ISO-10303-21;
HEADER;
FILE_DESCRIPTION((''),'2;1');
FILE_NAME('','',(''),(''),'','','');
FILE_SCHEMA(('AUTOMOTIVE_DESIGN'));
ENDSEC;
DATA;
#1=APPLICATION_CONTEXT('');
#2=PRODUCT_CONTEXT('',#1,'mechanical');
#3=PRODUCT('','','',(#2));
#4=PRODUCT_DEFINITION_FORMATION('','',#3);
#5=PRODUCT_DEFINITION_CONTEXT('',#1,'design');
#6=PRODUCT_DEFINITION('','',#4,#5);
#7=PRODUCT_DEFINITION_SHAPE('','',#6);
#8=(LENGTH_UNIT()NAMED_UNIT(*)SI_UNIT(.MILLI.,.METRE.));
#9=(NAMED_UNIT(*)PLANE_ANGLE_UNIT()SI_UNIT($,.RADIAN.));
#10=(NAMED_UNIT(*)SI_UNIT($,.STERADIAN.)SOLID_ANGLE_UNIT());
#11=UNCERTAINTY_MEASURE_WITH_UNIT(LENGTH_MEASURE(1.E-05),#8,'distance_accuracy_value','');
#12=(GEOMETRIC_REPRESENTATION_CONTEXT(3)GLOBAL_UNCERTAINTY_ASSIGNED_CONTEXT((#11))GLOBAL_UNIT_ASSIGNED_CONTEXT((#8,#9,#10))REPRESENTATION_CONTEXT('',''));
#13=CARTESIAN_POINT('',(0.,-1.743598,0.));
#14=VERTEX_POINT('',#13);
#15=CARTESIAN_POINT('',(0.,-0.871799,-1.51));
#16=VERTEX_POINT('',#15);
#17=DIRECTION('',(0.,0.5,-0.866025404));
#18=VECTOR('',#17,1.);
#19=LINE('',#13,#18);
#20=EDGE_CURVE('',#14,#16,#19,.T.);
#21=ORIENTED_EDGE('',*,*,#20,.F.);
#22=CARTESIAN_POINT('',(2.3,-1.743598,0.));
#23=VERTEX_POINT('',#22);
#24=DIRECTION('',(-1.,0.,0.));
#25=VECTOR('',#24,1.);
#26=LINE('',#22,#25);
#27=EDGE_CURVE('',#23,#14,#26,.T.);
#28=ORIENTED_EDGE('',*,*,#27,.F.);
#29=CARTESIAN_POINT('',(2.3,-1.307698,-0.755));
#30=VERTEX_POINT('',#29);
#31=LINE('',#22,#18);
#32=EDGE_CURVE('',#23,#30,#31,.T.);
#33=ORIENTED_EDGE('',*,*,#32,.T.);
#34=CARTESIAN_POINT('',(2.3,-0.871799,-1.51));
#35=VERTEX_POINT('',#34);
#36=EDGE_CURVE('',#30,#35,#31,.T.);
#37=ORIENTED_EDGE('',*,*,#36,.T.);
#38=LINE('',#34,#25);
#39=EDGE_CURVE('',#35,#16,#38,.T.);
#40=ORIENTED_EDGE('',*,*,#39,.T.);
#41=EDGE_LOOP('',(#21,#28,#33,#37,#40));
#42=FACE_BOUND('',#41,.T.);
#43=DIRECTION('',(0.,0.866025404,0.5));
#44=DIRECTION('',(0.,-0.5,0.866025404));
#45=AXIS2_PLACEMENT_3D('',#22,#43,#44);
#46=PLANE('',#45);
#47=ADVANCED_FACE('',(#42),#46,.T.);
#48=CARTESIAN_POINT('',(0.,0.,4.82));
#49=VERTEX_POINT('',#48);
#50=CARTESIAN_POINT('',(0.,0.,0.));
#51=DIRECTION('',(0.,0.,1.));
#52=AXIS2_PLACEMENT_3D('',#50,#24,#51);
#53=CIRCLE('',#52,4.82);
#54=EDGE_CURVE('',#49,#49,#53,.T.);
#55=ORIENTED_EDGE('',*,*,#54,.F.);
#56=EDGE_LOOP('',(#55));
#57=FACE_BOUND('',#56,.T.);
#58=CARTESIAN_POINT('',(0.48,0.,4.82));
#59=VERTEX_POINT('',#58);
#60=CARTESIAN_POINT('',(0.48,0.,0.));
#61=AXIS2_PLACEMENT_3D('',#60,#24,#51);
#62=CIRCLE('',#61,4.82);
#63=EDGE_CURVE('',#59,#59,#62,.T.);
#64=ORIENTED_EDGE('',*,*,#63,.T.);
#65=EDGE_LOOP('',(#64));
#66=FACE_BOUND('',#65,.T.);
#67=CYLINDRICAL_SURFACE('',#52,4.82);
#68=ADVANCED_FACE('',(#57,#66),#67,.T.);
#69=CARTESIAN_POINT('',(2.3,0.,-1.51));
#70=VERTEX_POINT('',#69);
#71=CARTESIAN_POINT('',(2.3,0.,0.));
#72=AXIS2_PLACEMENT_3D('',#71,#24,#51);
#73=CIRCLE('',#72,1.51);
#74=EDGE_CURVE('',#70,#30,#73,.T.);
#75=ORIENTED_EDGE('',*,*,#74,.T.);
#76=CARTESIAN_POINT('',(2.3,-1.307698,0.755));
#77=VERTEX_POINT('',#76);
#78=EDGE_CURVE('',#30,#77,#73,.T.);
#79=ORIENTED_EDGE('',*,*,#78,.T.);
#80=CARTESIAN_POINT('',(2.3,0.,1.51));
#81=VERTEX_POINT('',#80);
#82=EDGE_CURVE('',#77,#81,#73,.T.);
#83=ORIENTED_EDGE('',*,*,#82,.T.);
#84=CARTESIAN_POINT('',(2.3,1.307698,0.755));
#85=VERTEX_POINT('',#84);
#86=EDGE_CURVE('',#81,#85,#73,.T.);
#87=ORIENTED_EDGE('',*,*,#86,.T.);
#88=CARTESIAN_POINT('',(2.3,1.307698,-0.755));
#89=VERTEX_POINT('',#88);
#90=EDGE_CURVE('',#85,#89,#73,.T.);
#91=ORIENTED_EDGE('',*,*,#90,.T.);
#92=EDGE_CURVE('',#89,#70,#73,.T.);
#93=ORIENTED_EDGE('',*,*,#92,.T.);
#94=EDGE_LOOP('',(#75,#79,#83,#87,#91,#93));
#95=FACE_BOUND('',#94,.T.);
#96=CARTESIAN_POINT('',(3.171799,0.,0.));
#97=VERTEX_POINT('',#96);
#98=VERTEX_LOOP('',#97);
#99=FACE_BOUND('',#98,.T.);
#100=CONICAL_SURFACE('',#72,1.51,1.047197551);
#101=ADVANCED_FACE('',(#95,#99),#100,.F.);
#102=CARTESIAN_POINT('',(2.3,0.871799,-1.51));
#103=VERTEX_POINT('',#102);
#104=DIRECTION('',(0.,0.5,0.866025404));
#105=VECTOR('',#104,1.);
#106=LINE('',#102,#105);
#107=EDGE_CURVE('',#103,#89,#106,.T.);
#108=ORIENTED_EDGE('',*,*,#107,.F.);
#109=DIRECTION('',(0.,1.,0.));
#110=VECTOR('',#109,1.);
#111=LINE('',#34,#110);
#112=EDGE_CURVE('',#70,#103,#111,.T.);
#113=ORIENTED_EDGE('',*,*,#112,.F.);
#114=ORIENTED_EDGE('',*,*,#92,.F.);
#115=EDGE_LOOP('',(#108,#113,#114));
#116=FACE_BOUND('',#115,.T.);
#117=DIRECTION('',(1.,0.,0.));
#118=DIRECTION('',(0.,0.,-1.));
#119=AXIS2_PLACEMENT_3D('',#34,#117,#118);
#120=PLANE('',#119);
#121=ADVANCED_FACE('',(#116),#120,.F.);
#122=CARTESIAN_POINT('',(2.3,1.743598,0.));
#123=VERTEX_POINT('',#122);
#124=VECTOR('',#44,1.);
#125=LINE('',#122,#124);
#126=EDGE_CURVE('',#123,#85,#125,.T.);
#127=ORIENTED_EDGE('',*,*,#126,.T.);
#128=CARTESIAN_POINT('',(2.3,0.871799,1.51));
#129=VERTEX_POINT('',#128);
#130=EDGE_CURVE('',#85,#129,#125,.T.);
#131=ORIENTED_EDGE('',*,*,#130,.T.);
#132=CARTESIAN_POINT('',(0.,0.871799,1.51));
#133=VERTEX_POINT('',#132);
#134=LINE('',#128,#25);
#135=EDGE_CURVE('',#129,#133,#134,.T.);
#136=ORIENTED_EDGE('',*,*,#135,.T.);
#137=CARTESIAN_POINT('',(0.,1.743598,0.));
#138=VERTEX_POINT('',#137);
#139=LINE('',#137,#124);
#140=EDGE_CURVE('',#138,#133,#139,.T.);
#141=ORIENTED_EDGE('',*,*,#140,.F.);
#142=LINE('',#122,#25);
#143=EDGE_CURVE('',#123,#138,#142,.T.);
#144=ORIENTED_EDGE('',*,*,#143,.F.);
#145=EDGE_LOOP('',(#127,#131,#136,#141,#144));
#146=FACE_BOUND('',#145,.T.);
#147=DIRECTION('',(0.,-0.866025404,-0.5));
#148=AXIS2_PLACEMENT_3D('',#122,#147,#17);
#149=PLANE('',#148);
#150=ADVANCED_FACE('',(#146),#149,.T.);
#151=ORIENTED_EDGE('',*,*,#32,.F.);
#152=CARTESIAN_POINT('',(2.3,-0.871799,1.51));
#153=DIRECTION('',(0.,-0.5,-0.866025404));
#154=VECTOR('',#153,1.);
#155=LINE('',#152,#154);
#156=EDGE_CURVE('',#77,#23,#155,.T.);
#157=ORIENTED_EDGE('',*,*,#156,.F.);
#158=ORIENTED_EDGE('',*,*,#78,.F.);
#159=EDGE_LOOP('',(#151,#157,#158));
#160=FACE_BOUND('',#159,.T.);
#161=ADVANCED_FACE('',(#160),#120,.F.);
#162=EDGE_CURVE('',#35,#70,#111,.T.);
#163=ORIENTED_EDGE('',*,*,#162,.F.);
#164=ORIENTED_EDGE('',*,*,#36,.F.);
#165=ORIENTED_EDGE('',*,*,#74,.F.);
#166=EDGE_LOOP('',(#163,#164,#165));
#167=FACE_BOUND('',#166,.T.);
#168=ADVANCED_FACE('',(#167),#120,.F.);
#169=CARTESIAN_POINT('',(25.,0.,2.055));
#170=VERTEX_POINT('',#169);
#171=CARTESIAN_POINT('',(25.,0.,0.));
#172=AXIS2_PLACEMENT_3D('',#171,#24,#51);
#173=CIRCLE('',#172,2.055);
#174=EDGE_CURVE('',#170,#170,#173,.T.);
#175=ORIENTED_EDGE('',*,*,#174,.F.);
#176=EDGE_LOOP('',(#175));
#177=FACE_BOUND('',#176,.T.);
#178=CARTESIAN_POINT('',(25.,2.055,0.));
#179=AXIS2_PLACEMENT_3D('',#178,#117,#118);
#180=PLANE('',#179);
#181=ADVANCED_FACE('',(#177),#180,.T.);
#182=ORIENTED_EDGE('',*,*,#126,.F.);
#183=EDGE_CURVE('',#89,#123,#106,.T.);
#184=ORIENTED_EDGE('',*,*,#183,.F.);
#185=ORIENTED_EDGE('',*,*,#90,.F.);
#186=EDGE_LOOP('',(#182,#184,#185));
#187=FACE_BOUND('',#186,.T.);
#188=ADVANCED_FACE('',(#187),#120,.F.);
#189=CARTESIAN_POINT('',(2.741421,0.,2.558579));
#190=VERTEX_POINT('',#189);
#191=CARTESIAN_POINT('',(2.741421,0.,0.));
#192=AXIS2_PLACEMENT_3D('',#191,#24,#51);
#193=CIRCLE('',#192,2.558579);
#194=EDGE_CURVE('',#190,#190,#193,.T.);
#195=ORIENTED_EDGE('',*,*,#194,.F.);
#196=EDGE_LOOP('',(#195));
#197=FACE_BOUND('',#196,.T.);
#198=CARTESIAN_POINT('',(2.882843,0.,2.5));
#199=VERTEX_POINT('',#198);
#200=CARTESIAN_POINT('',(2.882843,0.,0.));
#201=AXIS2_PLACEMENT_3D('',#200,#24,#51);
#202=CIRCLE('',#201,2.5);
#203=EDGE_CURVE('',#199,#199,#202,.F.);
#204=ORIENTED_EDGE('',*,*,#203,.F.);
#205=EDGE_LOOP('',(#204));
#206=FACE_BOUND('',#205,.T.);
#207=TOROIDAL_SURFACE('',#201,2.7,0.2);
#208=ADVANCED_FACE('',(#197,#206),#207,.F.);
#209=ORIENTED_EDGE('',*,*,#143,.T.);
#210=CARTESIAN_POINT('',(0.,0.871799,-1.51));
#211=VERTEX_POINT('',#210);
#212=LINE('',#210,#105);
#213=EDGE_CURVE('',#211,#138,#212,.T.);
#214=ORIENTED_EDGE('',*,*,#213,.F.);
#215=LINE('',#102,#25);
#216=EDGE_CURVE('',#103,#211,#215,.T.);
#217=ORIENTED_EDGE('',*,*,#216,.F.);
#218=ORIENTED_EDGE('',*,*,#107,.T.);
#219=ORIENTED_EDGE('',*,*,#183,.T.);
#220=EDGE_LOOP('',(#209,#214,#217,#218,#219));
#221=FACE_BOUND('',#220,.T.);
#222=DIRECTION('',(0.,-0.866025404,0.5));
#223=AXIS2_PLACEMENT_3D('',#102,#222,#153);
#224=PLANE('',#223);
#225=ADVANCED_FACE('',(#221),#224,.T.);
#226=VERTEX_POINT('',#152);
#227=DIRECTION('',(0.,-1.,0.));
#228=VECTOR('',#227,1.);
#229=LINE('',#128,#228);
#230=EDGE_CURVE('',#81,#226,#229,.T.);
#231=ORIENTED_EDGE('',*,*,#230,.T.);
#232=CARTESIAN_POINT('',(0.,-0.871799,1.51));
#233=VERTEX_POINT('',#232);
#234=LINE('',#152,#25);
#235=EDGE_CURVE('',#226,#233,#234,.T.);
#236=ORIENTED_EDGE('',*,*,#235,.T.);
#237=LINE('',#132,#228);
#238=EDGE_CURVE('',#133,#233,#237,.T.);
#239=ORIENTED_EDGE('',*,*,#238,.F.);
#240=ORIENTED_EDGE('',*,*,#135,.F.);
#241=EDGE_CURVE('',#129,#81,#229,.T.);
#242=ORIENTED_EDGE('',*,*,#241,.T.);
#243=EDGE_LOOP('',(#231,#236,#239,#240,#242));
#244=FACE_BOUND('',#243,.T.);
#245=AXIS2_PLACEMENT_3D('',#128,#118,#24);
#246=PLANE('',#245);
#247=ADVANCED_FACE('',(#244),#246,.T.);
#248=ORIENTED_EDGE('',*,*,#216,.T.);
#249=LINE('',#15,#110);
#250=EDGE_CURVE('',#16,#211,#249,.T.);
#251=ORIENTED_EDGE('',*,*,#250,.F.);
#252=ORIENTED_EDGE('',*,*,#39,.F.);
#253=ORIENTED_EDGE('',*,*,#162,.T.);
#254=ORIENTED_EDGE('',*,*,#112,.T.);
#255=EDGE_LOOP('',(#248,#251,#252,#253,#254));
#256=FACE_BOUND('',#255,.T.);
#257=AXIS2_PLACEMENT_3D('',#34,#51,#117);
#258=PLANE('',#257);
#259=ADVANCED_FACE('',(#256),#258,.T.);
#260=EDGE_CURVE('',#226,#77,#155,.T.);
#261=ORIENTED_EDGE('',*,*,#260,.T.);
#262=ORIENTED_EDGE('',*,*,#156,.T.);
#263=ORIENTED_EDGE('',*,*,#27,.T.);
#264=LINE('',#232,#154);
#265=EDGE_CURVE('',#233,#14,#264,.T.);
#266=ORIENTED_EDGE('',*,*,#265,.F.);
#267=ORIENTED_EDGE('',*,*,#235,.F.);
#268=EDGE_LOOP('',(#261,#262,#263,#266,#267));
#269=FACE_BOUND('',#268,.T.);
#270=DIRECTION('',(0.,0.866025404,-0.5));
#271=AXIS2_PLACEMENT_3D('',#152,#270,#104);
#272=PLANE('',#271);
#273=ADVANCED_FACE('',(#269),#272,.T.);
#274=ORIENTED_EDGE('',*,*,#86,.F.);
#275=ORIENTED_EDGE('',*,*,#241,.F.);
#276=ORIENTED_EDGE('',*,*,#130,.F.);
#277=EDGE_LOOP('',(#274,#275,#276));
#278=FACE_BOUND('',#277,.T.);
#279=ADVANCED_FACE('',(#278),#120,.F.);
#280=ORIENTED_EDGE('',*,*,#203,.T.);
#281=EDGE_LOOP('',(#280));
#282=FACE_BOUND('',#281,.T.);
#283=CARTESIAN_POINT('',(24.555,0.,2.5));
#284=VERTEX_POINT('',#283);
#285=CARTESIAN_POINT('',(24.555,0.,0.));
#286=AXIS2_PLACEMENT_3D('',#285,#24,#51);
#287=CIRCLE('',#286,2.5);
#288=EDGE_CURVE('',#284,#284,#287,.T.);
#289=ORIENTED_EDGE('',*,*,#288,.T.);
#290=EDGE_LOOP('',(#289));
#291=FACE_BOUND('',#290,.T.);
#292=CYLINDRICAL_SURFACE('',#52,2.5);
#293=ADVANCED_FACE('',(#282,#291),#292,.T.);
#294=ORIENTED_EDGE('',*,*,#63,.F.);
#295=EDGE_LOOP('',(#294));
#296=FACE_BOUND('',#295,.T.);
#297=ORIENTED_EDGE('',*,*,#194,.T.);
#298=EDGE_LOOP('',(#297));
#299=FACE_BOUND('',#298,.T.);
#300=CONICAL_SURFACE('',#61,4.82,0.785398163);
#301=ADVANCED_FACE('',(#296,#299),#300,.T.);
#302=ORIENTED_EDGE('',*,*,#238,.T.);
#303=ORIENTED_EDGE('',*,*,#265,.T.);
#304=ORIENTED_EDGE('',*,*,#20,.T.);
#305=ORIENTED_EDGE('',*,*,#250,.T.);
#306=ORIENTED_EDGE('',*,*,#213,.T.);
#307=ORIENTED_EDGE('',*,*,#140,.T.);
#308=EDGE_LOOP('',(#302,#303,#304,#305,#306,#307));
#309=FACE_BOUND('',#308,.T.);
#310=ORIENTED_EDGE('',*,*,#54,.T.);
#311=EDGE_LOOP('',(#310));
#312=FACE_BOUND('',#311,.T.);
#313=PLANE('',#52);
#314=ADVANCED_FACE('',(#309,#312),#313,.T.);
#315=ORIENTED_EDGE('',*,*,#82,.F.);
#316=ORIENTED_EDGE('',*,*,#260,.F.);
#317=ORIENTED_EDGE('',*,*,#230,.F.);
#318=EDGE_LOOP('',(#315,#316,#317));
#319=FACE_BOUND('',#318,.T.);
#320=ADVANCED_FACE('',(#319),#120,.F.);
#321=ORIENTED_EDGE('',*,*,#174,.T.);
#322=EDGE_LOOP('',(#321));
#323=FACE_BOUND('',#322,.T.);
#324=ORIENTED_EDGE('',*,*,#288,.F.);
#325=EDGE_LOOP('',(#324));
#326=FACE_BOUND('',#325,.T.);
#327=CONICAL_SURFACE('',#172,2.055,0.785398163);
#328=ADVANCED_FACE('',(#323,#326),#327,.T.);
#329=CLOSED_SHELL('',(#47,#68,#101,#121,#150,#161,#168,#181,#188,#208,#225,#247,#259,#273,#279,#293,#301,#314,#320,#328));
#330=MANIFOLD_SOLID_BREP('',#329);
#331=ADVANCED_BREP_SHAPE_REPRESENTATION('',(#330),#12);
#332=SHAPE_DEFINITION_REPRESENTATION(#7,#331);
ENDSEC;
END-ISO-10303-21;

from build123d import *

# Parameters (mm, degrees)
FILLET1_R   = 0.2
HEX_START   = -2.3
HEX_2_DEPTH = 2.3


with BuildPart() as part:
    # BodySke → BaseBody (revolve)
    with BuildSketch(Plane.XY, mode=Mode.PRIVATE) as basebody_sk:
        Polygon((0, 0), (0, 4.82), (0.48, 4.82), (2.8, 2.5), (24.555, 2.5), (25, 2.055), (25, 0), align=None)
    revolve(basebody_sk.sketch.rotate(Axis((0, 0, 0), (1, 0, 0)), 90), axis=Axis((0, 0, 0), (1, 0, 0)))

    # Fillet1
    fillet1_edges = [part.edges().sort_by_distance(p)[0] for p in [
        (2.8, 0, -2.5),
    ]]
    fillet(fillet1_edges, radius=FILLET1_R)

    # Hex 2: read off the stored shape, not the designer's step
    # Hex 2 outline → Hex 2 (cut)
    with BuildSketch(Plane.ZY.offset(HEX_START)):
        Polygon((-1.51, -0.871798906), (0, -1.743597813), (1.51, -0.871798906), (1.51, 0.871798906), (0, 1.743597813), (-1.51, 0.871798906), align=None)
    extrude(amount=HEX_2_DEPTH, mode=Mode.SUBTRACT)

    # Hex 2 2 outline → Hex 2 2 (revolve, cut)
    with BuildSketch(Plane.YX):
        Polygon((1.51, 2.3), (0, 3.171798906), (0, 2.3), align=None)
    revolve(axis=Axis((0, 0, 0), (1, 0, 0)), mode=Mode.SUBTRACT)


solid = part.part
